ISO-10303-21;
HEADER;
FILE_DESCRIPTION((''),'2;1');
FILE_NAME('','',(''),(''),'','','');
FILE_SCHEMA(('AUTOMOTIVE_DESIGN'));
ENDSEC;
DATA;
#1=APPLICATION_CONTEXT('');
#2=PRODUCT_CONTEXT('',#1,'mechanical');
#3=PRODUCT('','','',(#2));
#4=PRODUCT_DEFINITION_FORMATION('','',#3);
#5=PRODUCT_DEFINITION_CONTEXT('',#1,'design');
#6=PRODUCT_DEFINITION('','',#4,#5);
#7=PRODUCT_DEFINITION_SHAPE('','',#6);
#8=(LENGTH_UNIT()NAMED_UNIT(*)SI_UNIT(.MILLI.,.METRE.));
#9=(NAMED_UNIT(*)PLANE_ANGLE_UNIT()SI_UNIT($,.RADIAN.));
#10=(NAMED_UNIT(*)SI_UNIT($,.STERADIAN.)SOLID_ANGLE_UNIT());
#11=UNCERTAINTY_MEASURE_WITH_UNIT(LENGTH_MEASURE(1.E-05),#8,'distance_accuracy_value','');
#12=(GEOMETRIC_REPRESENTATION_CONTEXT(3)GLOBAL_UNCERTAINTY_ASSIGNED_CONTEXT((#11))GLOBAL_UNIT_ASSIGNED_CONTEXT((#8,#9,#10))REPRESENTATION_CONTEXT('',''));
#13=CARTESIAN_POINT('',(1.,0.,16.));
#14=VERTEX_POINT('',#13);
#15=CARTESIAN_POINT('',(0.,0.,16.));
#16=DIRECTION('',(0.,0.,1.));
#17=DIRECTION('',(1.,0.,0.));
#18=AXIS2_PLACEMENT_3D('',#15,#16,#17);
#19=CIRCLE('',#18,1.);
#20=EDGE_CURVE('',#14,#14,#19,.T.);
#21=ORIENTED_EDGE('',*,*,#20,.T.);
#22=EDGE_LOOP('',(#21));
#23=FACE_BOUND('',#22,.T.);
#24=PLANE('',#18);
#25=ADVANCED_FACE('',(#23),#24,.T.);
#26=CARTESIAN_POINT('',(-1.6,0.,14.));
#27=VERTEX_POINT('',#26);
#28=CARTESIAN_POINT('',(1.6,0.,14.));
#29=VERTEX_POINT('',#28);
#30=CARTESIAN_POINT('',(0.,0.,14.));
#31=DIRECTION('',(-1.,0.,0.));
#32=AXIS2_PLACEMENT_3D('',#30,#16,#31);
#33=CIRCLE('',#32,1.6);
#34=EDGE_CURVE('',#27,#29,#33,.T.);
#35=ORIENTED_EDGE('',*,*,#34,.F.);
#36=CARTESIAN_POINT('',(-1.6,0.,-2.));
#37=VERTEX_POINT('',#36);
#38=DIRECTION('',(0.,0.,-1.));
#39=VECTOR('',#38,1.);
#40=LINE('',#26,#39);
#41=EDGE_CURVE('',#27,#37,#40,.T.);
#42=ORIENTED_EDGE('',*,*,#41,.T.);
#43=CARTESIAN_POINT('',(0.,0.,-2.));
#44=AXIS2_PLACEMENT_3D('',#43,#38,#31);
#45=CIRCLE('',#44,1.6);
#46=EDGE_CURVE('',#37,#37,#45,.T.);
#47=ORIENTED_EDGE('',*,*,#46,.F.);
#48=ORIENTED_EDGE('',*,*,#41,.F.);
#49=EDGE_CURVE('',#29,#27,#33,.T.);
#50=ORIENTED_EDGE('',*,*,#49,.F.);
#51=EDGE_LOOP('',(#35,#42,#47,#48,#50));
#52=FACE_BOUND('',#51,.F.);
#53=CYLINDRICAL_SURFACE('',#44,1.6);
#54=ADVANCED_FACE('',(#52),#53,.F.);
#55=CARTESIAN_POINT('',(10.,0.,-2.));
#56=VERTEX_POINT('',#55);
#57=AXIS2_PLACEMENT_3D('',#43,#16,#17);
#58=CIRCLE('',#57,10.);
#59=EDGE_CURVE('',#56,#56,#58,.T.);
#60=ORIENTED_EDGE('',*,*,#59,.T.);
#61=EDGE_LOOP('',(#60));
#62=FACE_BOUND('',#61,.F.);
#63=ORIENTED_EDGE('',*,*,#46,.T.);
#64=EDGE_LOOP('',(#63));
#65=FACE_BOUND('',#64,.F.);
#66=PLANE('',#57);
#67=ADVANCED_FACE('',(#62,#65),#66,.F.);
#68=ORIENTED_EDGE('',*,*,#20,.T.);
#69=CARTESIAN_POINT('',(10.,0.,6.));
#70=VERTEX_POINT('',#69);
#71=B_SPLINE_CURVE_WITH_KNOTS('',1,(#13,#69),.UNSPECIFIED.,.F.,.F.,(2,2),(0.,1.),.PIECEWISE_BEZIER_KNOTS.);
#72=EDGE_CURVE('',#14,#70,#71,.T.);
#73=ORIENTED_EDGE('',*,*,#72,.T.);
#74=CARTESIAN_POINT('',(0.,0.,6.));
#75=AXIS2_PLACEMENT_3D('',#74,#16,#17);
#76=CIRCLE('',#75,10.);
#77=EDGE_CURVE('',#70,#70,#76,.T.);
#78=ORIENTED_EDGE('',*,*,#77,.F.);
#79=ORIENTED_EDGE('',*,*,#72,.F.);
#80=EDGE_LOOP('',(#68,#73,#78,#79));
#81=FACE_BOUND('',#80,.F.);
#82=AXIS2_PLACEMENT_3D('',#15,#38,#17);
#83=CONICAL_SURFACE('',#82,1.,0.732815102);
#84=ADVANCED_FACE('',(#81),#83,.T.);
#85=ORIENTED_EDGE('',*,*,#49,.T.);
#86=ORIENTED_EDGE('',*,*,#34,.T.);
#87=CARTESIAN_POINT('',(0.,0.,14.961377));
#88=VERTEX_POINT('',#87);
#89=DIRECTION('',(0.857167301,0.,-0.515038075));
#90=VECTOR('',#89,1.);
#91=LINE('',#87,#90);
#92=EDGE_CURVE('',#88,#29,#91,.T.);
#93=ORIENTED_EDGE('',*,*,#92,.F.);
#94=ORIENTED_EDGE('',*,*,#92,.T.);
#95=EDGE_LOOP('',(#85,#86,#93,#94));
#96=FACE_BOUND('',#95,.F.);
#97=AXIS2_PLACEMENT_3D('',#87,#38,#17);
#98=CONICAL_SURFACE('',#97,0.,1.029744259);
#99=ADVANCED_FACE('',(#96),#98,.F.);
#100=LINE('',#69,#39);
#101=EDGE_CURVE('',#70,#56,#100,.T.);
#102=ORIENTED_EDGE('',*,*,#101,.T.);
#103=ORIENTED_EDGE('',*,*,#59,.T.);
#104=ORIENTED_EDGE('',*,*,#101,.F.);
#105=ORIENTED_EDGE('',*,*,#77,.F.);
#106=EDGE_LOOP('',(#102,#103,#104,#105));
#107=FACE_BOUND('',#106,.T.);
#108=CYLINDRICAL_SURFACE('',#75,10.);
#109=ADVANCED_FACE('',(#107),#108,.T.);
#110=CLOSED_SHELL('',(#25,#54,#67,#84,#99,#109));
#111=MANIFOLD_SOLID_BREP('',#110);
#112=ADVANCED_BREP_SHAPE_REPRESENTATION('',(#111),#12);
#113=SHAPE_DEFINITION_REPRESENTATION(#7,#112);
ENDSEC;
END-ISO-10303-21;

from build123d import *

# Parameters (mm, degrees)
F0_R           = 10
F0_R_2         = 6.1
F1_DEPTH       = 6
F2_DEPTH       = 10
F4_R           = 1
F1_FACE_R      = 10
F7_D           = 4.2
F7_CBORE_D     = 7
F7_CBORE_DEPTH = 4
F8_D           = 3.2
F8_DEPTH       = 8
F8_START       = 6
F8_TIP         = 0.9613769904
F6_R           = 10
F10_DEPTH      = 8
F12_DEPTH      = 10


with BuildPart() as f1:
    # F0 (on Top) → F1 (new body)
    with BuildSketch(Plane.XY):
        Circle(F0_R)
        Circle(F0_R_2, mode=Mode.SUBTRACT)
        Circle(F0_R_2)
    extrude(amount=F1_DEPTH)

    # F0 (on Top) → F2 (join)
    with BuildSketch(Plane.XY):
        Circle(F0_R)
        Circle(F0_R_2, mode=Mode.SUBTRACT)
    extrude(amount=-F2_DEPTH)

    # F7 (through all)
    with Locations(Plane(origin=(0, 0, 0), x_dir=(1, 0, 0), z_dir=(0, 0, -1))):
        with Locations((0, 0)):
            CounterBoreHole(F7_D / 2, F7_CBORE_D / 2, F7_CBORE_DEPTH)


with BuildPart() as f5:
    # F4 (on offset) → F5 section 0
    with BuildSketch(Plane.XY.offset(16)):
        Circle(F4_R)
    # F1_face (on face) → F5 section 1
    with BuildSketch(Plane.XY.offset(6)):
        Circle(F1_FACE_R)
    loft()

    # F8
    # its depths count from where the whole tool has entered the part; down to there all is cleared
    with Locations(Plane(origin=(0, 0, 0), x_dir=(1, 0, 0), z_dir=(0, 0, -1)).offset(-F8_START)):
        with Locations((0, 0)):
            Hole(F8_D / 2, depth=F8_DEPTH)
            with Locations((0, 0, -(F8_DEPTH + F8_TIP / 2))):  # 118° drill point
                Cone(0, F8_D / 2, F8_TIP, mode=Mode.SUBTRACT)

    # F6 (on face) → F10 (join)
    with BuildSketch(Plane.XY.offset(6)):
        Circle(F6_R)
    extrude(amount=-F10_DEPTH)

    # F11 (on face) → F12 (cut)
    with BuildSketch(Plane(origin=(0, 0, -2), x_dir=(1, 0, 0), z_dir=(0, 0, -1))):
        with BuildLine():
            ThreePointArc((1.6, 0), (0, 1.6), (-1.6, 0))
            ThreePointArc((-1.6, 0), (0, -1.6), (1.6, 0))
        make_face()
    extrude(amount=-F12_DEPTH, mode=Mode.SUBTRACT)


solid = f5.part
